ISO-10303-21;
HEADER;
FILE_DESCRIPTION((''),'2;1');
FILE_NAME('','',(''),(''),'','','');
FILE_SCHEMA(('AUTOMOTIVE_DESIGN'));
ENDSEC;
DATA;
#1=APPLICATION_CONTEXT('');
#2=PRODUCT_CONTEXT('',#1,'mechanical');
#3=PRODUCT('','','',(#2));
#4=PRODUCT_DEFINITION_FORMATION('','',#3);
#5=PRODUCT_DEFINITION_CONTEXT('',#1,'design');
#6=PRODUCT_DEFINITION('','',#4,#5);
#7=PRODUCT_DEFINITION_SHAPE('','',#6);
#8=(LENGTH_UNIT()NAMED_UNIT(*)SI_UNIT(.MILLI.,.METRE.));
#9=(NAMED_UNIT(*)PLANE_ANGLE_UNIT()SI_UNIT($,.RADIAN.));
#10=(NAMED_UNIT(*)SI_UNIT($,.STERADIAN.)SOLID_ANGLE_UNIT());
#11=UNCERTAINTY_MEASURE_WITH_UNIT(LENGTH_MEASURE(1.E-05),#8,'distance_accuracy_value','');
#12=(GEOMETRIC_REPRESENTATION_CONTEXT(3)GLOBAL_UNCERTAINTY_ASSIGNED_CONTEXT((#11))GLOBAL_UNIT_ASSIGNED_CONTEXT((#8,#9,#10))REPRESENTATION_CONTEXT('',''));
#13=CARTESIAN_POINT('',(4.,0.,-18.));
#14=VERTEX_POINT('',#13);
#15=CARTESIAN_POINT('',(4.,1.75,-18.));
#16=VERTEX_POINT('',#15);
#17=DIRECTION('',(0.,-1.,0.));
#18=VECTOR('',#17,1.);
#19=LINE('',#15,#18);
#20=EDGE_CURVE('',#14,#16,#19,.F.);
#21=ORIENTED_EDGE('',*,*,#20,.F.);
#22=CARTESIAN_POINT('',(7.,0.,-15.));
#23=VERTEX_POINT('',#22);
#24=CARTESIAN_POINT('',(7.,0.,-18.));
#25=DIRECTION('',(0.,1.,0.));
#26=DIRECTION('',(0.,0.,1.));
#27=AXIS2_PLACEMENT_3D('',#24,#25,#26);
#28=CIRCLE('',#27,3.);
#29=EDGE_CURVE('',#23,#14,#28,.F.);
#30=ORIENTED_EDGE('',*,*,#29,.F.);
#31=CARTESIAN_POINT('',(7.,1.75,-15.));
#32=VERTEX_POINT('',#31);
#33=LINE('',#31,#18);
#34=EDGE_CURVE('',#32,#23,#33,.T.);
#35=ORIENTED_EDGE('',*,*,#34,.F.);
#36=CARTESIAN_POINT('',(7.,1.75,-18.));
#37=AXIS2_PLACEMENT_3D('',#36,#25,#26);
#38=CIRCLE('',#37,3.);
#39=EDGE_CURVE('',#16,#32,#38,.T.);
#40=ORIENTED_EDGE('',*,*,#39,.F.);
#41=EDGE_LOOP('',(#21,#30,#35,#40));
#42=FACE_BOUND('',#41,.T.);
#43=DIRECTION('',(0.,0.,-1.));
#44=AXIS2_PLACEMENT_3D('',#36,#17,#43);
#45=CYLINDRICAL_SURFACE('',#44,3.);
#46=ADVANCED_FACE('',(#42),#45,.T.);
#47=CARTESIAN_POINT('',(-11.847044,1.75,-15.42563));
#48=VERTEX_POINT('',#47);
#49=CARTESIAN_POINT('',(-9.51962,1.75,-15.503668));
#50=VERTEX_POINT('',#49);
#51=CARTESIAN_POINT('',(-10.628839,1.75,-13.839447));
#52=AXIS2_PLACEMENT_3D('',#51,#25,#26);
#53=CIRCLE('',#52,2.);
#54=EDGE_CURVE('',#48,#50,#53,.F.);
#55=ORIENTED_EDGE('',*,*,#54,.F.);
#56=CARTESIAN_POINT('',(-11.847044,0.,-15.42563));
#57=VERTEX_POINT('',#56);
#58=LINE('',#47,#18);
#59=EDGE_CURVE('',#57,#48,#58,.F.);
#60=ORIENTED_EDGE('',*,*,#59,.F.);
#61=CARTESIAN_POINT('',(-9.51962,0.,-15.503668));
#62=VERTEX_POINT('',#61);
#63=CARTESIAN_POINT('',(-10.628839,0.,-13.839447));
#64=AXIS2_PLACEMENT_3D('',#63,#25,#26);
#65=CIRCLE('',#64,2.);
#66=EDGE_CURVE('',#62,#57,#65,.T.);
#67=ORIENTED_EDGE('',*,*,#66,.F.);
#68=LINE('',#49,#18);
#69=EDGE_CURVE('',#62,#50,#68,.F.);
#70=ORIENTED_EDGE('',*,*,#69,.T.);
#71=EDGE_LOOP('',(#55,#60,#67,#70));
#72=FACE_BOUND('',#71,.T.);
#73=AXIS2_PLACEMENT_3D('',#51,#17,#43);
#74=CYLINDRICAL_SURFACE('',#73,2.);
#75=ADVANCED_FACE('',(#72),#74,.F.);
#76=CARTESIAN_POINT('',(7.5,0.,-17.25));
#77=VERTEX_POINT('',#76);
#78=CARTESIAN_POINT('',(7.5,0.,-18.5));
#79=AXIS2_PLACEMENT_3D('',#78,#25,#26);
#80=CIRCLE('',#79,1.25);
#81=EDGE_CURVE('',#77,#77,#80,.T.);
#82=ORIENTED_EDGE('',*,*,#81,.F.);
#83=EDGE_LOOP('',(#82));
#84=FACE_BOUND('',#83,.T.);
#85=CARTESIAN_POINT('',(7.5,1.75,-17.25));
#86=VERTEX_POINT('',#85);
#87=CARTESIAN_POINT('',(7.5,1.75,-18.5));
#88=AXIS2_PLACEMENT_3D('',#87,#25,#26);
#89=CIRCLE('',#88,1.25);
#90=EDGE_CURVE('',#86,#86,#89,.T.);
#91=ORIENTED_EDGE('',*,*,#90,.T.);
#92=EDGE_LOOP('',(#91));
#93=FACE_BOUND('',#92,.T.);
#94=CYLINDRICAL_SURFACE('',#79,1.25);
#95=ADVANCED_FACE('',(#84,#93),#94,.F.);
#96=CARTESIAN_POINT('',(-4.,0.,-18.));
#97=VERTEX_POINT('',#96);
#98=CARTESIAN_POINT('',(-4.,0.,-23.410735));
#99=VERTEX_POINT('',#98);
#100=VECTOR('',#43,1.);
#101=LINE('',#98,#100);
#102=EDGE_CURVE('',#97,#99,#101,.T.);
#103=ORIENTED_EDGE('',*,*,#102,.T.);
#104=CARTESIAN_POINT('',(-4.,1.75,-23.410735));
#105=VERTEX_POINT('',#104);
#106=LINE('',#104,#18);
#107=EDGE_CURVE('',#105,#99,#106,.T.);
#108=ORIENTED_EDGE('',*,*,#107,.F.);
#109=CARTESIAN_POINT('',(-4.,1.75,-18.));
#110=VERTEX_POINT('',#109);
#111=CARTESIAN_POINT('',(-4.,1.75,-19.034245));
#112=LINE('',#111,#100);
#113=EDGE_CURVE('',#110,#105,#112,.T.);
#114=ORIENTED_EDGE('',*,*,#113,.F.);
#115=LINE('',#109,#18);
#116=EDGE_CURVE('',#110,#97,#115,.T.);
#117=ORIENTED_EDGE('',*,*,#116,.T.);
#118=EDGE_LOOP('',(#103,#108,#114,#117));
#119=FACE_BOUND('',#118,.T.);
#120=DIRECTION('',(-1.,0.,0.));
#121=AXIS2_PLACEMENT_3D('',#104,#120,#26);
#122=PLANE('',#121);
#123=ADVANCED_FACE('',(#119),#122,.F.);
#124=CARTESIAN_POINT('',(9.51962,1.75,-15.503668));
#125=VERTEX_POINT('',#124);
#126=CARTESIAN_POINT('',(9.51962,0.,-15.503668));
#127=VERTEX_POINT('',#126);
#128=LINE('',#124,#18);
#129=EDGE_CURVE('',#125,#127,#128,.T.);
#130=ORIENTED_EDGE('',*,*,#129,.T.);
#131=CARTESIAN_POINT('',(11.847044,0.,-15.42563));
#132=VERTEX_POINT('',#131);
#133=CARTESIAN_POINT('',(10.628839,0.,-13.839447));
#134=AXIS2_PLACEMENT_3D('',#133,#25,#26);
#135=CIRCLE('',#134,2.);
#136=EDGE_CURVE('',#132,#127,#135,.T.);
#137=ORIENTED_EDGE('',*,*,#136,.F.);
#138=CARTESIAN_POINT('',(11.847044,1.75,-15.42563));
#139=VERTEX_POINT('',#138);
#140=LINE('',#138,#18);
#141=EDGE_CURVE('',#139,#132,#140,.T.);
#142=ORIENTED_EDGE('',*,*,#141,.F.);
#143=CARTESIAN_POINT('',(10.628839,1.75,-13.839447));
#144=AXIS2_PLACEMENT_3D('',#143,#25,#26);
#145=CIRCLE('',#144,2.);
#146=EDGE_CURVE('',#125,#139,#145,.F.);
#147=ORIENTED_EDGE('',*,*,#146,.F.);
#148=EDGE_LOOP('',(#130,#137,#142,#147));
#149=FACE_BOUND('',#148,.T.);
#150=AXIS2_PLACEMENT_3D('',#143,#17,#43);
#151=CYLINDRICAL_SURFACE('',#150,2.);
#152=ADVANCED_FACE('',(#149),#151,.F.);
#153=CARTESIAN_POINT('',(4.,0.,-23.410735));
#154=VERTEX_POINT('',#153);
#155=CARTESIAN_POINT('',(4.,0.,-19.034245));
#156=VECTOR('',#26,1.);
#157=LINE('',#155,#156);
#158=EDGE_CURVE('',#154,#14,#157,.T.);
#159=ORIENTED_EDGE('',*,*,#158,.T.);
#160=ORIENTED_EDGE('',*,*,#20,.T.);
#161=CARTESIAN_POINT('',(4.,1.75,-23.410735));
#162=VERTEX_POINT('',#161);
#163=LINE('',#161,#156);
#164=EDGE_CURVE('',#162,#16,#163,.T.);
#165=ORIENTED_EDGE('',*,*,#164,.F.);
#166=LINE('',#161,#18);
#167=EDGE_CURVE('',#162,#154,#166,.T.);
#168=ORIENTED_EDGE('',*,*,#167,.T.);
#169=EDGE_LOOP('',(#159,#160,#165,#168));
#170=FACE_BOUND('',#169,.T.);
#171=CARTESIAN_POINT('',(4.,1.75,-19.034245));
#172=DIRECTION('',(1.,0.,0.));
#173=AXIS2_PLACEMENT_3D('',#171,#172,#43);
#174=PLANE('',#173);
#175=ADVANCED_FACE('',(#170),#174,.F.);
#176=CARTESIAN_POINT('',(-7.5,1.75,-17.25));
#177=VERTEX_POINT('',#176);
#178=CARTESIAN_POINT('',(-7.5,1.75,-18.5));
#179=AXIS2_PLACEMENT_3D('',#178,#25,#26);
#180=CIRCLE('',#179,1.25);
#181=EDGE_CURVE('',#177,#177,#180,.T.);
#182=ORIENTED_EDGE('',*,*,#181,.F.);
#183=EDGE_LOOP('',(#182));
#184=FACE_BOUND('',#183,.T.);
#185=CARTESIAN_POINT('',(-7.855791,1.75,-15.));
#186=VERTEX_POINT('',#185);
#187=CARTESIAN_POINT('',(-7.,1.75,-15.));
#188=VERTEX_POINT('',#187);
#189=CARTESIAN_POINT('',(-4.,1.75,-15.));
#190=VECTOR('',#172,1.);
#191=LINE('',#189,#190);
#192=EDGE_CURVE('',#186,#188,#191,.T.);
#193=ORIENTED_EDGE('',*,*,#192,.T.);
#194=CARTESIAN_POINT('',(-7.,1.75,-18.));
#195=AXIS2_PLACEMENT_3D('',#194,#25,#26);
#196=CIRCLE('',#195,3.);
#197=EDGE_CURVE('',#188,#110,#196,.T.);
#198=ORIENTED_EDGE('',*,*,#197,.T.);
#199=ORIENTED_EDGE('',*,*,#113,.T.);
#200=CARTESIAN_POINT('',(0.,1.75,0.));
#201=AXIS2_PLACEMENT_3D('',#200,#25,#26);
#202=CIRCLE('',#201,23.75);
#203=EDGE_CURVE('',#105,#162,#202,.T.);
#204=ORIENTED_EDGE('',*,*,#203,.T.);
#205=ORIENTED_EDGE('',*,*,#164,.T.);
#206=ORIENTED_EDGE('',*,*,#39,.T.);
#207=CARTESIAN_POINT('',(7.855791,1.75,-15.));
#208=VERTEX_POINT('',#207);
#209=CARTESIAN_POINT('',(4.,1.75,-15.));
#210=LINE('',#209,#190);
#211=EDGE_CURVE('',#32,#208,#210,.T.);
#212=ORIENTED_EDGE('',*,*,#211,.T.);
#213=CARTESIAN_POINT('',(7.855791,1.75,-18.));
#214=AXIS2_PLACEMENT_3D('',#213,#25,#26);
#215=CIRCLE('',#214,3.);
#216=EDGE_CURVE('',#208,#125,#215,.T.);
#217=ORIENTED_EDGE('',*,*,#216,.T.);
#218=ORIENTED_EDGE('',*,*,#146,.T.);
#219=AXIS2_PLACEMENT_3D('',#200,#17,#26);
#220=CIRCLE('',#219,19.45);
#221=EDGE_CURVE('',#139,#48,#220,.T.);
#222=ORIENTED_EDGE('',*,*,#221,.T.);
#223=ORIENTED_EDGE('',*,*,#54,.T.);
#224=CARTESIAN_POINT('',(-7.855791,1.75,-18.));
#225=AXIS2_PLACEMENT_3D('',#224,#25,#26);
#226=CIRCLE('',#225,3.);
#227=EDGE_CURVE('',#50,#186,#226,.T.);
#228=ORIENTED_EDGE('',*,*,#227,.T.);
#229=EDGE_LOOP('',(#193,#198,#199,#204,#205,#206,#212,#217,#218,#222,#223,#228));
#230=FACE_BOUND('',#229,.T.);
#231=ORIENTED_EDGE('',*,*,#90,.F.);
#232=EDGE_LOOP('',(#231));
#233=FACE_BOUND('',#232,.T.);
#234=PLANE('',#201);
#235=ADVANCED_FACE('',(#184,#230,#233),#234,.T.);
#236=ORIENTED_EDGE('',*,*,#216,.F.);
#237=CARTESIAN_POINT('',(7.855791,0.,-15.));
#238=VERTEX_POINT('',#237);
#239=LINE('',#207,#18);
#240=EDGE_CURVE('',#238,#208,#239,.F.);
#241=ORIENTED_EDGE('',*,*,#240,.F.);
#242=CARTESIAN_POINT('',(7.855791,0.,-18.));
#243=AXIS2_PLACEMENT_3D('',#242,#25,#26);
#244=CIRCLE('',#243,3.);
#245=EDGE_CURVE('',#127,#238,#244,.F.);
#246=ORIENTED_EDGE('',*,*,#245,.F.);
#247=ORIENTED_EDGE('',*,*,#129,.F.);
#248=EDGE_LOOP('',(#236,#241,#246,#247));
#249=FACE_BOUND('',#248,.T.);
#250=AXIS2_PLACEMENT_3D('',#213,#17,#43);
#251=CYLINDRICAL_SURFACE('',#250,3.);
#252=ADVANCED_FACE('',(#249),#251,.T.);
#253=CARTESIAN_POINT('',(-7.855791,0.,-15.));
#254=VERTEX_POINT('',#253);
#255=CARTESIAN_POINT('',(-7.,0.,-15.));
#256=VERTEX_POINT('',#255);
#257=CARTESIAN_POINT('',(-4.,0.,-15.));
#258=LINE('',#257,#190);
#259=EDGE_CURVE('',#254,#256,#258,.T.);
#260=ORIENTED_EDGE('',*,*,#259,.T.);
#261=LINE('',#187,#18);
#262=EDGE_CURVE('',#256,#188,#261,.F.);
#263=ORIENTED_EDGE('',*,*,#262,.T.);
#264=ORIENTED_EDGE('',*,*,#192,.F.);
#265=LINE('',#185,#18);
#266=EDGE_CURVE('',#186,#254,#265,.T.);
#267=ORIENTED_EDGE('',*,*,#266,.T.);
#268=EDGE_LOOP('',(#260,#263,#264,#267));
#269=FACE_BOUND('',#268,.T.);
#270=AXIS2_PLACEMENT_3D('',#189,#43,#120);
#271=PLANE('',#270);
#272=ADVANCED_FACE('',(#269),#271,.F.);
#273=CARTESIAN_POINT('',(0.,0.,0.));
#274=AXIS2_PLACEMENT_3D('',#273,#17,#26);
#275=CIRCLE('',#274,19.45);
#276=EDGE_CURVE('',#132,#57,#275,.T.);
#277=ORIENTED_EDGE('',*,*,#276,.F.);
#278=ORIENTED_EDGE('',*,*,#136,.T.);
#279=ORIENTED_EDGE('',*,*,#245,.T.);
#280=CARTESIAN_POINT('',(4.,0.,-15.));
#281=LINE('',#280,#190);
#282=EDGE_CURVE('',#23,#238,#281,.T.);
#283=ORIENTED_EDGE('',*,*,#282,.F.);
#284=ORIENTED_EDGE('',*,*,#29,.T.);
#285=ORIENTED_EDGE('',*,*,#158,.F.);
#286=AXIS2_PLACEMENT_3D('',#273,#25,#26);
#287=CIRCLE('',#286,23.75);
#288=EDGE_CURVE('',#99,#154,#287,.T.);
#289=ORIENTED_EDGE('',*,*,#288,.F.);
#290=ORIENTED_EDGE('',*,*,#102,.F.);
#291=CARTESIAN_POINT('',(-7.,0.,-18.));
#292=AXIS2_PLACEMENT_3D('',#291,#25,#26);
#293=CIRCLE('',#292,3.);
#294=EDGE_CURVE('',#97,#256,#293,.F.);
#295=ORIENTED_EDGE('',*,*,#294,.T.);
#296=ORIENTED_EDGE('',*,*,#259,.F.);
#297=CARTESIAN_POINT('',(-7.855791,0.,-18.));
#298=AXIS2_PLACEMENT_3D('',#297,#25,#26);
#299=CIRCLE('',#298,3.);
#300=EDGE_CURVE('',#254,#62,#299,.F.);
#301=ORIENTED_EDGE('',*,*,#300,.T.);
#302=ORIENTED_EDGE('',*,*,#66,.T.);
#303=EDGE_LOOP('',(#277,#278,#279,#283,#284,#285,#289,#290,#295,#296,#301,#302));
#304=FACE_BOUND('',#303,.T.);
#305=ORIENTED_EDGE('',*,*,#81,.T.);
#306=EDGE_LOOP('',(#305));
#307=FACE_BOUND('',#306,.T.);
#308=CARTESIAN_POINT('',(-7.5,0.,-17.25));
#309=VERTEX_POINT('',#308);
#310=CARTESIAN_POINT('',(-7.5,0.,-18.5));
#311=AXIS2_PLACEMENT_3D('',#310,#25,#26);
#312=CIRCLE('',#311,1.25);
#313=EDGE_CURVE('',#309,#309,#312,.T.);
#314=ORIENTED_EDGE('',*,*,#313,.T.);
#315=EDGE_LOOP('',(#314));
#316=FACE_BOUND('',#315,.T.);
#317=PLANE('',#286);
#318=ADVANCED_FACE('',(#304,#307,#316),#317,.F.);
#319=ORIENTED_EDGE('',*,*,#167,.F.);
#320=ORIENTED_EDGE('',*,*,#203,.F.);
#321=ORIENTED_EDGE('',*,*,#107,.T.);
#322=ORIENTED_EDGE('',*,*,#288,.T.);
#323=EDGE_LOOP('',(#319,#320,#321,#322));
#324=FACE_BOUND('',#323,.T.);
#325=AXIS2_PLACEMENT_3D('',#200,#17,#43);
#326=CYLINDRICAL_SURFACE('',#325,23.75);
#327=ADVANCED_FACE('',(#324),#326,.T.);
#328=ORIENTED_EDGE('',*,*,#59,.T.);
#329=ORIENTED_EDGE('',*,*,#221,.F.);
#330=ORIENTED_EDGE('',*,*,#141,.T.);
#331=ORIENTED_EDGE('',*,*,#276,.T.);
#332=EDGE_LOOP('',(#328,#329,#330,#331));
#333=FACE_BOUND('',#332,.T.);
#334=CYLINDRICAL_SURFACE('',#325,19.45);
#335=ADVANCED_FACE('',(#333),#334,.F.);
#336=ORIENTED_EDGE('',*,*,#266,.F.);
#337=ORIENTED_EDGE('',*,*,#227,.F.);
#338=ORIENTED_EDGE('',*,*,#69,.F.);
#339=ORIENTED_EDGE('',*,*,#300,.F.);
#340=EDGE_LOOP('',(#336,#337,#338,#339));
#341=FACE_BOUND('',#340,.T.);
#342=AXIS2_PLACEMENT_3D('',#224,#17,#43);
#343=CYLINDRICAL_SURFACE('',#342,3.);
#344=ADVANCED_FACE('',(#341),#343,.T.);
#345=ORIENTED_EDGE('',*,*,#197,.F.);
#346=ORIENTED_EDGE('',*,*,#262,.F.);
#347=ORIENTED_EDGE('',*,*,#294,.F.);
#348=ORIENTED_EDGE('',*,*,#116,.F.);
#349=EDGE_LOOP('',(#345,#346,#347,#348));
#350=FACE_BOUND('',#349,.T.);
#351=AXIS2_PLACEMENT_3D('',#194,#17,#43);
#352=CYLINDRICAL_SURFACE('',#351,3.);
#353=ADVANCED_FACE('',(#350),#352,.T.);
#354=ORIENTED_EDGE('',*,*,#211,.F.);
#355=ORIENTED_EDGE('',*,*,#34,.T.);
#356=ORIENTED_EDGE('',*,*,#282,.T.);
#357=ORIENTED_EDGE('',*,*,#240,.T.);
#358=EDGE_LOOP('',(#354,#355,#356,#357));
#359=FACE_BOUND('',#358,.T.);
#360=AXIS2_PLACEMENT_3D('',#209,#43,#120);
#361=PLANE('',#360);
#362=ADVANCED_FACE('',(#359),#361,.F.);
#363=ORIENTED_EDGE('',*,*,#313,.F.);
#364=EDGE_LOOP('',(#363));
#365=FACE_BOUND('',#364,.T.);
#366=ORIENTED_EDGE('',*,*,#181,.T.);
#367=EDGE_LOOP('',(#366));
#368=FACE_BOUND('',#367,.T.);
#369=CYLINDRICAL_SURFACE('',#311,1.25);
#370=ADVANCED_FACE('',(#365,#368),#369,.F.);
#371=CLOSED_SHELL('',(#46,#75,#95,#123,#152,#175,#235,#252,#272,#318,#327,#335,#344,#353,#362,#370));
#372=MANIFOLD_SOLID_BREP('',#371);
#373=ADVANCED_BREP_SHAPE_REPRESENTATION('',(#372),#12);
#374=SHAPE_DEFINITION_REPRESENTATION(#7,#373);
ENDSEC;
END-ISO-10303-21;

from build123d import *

# Parameters (mm, degrees)
BOSS_EXTRUDE1_DEPTH = 1.75
FILLET2_R           = 2
FILLET3_R           = 3
SKETCH2_R           = 1.2500000000000004
SKETCH2_R_2         = 1.2499999999999996
CUT_EXTRUDE1_DEPTH  = 1.75


with BuildPart() as part:
    # Sketch1 → Boss-Extrude1 (new body)
    with BuildSketch(Plane(origin=(0, 0, 0), x_dir=(1, 0, 0), z_dir=(0, 1, 0))):
        with BuildLine():
            Line((-4, 23.410734717218936), (-4, 19.03424545391805))
            Line((-4, 19.03424545391805), (-3.999999999999999, 15))
            Line((-3.999999999999999, 15), (-9, 15))
            Line((-9, 15), (-9, 17.242462121170515))
            ThreePointArc((-9, 17.242462121170515), (-3.57e-15, -19.45), (9, 17.242462121170515))
            Line((9, 17.242462121170515), (9.000000000000002, 15))
            Line((9.000000000000002, 15), (4, 15))
            Line((4, 15), (4, 19.034245453918047))
            Line((4, 19.034245453918047), (3.999999999999999, 23.410734717218936))
            ThreePointArc((3.999999999999999, 23.410734717218936), (-4.36e-15, -23.75), (-4, 23.410734717218936))
        make_face()
    extrude(amount=BOSS_EXTRUDE1_DEPTH)

    # Fillet2
    # the kernel refuses this fillet: 2 mm, written as the material it adds along each edge
    with BuildSketch(Plane(origin=(9.000000000000005, 0, -17.24246212117051), x_dir=(-2.38e-15, 0, 1), z_dir=(0, 1, 0))) as fillet2_piece_1:
        with BuildLine():
            CenterArc((3.4030154331547133, 1.62883885330701), FILLET2_R, 142.4753629283073, 92.05463357157004)
            Line((1.8168324316629296, 2.8470438794739996), (1.7851087716330947, 2.871407979997339))
            ThreePointArc((1.7851087716330947, 2.871407979997339), (0.812783961312924, 1.4845493734112696), (-0.0354600763417388, 0.01850899742930592))
            Line((-0.0354600763417388, 0.01850899742930592), (1e-16, -0.03999999999999915))
            ThreePointArc((1e-16, -0.03999999999999915), (1.1212310605852558, -0.04000000000000004), (2.219251054930826, -0.03257677706614009))
            Line((2.219251054930826, -0.03257677706614009), (2.24246212117051, 0))
        make_face()
    extrude(amount=1.75)
    with BuildSketch(Plane(origin=(-9, 0, -17.242462121170515), x_dir=(-0.842979895323632, 0, 0.5379450679020662), z_dir=(0, 1, 0))) as fillet2_piece_2:
        with BuildLine():
            CenterArc((3.203713774320002, 1.9924477660817068), FILLET2_R, 182.92614352023125, 92.05463357157015)
            Line((1.2063214380408842, 1.8903504841715306), (1.1663735913153022, 1.8883085385333274))
            ThreePointArc((1.1663735913153022, 1.8883085385333274), (0.5694415232074965, 0.966693044801846), (-0.03371919581294457, 0.02151780271608219))
            Line((-0.03371919581294457, 0.02151780271608219), (-0.00347286045996735, -0.03984895532163413))
            ThreePointArc((-0.00347286045996735, -0.03984895532163413), (1.68867839865919, -0.11344547485539745), (3.380829657778342, -0.03984895532163431))
            Line((3.380829657778342, -0.03984895532163431), (3.3773567973183756, 1.9e-16))
        make_face()
    extrude(amount=1.75)

    # Fillet3
    fillet3_edges = [part.edges().sort_by_distance(p)[0] for p in [
        (-9, 0.875, -15),
        (9.000000000000002, 0.875, -15),
        (4, 0.875, -15),
        (-3.999999999999999, 0.875, -15),
    ]]
    fillet(fillet3_edges, radius=FILLET3_R)

    # Sketch2 → Cut-Extrude1 (cut)
    with BuildSketch(Plane(origin=(0, 1.75, 0), x_dir=(1, 0, 0), z_dir=(0, 1, 0))):
        with Locations(Location((-7.5, 18.5, 0), (0, 0, 270))):
            Circle(SKETCH2_R)
        with Locations(Location((7.5, 18.5, 0), (0, 0, 270))):
            Circle(SKETCH2_R_2)
    extrude(amount=-CUT_EXTRUDE1_DEPTH, mode=Mode.SUBTRACT)


solid = part.part
